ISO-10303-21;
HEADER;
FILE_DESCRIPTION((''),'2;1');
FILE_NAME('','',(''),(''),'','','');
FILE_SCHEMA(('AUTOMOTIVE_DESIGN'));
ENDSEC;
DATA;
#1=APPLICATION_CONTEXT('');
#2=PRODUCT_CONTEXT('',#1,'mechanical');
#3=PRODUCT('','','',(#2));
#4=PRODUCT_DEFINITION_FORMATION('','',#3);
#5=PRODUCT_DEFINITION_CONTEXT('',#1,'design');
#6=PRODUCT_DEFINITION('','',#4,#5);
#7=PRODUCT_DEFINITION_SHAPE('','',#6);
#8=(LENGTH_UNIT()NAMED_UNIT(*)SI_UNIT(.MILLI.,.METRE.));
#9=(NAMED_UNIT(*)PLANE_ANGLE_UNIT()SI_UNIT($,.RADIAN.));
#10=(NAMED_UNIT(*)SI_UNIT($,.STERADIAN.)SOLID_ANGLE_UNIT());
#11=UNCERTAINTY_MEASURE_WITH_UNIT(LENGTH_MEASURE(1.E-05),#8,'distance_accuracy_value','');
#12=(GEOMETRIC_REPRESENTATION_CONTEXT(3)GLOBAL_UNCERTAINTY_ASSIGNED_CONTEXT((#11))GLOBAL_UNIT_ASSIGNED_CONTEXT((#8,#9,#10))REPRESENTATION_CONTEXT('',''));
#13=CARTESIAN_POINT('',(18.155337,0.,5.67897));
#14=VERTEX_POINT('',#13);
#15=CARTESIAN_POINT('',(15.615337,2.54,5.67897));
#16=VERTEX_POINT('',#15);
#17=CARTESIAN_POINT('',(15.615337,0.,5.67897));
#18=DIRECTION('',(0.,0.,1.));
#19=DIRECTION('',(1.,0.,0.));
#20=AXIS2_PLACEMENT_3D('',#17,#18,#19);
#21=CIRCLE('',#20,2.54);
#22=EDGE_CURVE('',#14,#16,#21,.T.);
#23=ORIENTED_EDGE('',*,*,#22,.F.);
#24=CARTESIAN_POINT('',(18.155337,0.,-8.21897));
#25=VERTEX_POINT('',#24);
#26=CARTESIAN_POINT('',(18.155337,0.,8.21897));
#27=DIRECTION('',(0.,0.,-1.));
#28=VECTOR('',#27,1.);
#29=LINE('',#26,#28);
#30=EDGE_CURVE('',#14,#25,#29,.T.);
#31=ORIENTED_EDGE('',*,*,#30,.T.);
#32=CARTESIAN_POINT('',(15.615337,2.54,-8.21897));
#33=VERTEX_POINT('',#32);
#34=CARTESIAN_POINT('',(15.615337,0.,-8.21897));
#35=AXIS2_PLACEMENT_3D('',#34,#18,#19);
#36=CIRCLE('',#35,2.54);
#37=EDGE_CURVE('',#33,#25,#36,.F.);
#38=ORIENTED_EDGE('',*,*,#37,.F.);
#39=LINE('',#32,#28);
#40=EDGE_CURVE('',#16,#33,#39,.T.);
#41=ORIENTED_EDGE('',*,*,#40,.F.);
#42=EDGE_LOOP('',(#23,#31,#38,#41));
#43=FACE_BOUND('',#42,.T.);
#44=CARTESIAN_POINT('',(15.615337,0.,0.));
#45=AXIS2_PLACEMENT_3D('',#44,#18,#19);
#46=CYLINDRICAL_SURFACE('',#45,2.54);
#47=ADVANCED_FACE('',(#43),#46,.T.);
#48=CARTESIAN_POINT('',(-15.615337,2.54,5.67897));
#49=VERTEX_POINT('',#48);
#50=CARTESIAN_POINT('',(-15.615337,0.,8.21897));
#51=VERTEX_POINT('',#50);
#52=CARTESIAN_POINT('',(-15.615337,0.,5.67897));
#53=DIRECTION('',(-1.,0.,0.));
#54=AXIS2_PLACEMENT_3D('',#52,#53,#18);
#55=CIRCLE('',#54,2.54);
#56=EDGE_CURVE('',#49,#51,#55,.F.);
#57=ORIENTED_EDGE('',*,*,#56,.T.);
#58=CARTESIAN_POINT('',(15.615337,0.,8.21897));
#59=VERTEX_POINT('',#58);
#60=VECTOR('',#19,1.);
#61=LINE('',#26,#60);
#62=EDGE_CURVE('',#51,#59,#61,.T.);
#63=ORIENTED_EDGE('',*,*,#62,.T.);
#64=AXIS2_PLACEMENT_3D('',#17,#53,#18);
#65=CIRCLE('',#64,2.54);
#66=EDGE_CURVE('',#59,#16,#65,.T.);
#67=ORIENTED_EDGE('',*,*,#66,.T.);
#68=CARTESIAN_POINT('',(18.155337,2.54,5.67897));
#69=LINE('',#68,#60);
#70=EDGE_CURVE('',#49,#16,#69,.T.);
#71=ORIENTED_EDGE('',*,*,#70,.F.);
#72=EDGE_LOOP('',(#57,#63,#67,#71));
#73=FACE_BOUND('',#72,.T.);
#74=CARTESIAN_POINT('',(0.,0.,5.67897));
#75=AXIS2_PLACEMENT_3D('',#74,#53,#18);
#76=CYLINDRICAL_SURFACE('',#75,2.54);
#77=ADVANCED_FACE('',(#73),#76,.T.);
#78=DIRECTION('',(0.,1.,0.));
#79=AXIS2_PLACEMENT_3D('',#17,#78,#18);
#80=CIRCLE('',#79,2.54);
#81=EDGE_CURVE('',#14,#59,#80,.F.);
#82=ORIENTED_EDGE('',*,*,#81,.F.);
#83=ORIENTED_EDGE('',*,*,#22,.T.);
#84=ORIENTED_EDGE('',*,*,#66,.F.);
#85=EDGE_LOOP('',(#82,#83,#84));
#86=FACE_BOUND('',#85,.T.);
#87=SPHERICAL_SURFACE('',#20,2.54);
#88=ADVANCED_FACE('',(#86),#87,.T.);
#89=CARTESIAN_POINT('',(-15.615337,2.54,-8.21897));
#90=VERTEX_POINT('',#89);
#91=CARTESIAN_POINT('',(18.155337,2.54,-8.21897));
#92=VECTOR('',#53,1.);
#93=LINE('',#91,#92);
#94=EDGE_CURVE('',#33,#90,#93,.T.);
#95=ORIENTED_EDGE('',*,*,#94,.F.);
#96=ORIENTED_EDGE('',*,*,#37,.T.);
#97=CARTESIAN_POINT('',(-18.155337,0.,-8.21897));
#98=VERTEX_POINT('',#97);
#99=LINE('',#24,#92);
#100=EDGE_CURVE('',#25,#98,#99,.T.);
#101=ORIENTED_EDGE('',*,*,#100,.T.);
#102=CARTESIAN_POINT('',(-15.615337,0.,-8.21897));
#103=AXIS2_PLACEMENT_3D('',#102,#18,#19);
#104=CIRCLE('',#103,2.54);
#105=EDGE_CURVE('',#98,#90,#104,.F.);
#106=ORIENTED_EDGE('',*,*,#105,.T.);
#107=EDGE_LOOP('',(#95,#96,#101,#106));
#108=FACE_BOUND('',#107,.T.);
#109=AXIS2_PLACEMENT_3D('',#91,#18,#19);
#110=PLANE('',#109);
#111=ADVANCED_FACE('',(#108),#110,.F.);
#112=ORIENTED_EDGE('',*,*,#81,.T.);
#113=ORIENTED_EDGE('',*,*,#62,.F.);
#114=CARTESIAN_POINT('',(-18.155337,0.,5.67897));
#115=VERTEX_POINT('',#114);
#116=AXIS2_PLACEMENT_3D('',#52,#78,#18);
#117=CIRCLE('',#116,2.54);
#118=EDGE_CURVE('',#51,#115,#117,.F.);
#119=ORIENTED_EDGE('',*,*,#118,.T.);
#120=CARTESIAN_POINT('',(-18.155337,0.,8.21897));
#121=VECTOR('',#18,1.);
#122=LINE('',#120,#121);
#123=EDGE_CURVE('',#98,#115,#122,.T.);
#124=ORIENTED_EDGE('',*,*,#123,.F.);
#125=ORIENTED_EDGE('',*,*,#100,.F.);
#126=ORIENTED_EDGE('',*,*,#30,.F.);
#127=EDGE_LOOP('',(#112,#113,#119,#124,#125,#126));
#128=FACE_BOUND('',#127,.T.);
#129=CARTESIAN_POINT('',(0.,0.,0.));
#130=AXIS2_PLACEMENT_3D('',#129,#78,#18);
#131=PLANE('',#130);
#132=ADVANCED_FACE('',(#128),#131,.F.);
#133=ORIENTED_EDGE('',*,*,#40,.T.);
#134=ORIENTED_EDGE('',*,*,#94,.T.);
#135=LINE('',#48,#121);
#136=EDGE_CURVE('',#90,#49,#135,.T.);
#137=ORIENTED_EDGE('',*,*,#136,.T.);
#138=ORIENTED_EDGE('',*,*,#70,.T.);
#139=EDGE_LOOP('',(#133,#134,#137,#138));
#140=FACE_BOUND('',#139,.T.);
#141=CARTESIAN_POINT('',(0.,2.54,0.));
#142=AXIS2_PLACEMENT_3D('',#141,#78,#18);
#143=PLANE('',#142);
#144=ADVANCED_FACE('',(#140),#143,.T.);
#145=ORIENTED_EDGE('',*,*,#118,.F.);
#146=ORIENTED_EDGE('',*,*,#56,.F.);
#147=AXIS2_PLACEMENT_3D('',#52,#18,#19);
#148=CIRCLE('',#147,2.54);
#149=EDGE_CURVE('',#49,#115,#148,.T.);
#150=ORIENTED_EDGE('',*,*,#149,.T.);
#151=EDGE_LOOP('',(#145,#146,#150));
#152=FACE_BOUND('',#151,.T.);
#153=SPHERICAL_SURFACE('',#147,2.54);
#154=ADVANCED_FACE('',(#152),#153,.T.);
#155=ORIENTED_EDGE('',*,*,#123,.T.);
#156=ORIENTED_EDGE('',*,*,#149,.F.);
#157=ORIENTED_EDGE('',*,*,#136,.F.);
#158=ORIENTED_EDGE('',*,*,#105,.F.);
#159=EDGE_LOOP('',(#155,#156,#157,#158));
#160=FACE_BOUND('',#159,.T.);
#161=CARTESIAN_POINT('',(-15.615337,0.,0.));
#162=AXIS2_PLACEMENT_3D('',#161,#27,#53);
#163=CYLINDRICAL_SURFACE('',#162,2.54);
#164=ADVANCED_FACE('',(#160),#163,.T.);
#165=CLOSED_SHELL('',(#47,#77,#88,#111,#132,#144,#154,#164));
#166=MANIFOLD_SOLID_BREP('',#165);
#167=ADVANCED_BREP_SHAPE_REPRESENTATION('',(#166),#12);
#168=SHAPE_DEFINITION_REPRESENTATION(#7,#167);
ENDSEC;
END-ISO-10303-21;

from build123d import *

# Parameters (mm, degrees)
SKETCH1_W           = 36.310674736
SKETCH1_H           = 16.43794059
BOSS_EXTRUDE1_DEPTH = 2.54
FILLET1_R           = 2.54
FILLET2_R           = 2.54


# Some blends are built 0.0001 mm under size
with BuildPart() as part:
    # Sketch1 → Boss-Extrude1 (new body)
    with BuildSketch(Plane(origin=(0, 0, 0), x_dir=(1, 0, 0), z_dir=(0, 1, 0))):
        Rectangle(SKETCH1_W, SKETCH1_H)
    extrude(amount=BOSS_EXTRUDE1_DEPTH)

    # Fillet1
    fillet1_edges = [part.edges().sort_by_distance(p)[0] for p in [
        (18.155337368, 1.27, 8.218970295),
        (-18.155337368, 1.27, 8.218970295),
        (0, 2.54, 8.218970295),
    ]]
    fillet(fillet1_edges, radius=FILLET1_R - 0.0001)  # a hair under: the kernel refuses the full size

    # Fillet2
    # the kernel refuses this fillet: 2.54 mm, written as the material it takes off along each edge
    with BuildSketch(Plane(origin=(-15.615337368, 0, 8.218970295), x_dir=(0, 1, 0), z_dir=(1, 0, 0))) as fillet2_piece_1:
        with BuildLine():
            CenterArc((0.0001, -2.5399), 2.5399, 0, 90)
            Line((2.54, -2.5399), (2.54, 0))
            Line((2.54, 0), (0.0001, 0))
        make_face()
    revolve(axis=Axis((-15.615337368, 0, 8.218970295), (0, 0, 1)), revolution_arc=90, mode=Mode.SUBTRACT)
    with BuildSketch(Plane(origin=(15.615337368, 0, 8.218970295), x_dir=(1, 0, 0), z_dir=(0, -1, 0))) as fillet2_piece_2:
        with BuildLine():
            CenterArc((0.0001, -2.5399), 2.5399, 0, 90)
            Line((2.54, -2.5399), (2.54, 0))
            Line((2.54, 0), (0.0001, 0))
        make_face()
    revolve(axis=Axis((15.615337368, 0, 8.218970295), (0, 0, 1)), revolution_arc=90, mode=Mode.SUBTRACT)
    with BuildSketch(Plane(origin=(-18.155337368, 2.54, 8.218970295), x_dir=(0, -1, 0), z_dir=(0, 0, -1)), Plane(origin=(18.155337368, 2.54, -14.568970295), x_dir=(0, -1, 0), z_dir=(0, 0, 1))) as fillet2_piece_3:
        with BuildLine():
            CenterArc((FILLET2_R, -FILLET2_R), FILLET2_R, 90, 90)
            Line((0, -FILLET2_R), (0, 0))
            Line((0, 0), (FILLET2_R, 0))
        make_face()
    extrude(amount=22.78794059, mode=Mode.SUBTRACT)


solid = part.part
